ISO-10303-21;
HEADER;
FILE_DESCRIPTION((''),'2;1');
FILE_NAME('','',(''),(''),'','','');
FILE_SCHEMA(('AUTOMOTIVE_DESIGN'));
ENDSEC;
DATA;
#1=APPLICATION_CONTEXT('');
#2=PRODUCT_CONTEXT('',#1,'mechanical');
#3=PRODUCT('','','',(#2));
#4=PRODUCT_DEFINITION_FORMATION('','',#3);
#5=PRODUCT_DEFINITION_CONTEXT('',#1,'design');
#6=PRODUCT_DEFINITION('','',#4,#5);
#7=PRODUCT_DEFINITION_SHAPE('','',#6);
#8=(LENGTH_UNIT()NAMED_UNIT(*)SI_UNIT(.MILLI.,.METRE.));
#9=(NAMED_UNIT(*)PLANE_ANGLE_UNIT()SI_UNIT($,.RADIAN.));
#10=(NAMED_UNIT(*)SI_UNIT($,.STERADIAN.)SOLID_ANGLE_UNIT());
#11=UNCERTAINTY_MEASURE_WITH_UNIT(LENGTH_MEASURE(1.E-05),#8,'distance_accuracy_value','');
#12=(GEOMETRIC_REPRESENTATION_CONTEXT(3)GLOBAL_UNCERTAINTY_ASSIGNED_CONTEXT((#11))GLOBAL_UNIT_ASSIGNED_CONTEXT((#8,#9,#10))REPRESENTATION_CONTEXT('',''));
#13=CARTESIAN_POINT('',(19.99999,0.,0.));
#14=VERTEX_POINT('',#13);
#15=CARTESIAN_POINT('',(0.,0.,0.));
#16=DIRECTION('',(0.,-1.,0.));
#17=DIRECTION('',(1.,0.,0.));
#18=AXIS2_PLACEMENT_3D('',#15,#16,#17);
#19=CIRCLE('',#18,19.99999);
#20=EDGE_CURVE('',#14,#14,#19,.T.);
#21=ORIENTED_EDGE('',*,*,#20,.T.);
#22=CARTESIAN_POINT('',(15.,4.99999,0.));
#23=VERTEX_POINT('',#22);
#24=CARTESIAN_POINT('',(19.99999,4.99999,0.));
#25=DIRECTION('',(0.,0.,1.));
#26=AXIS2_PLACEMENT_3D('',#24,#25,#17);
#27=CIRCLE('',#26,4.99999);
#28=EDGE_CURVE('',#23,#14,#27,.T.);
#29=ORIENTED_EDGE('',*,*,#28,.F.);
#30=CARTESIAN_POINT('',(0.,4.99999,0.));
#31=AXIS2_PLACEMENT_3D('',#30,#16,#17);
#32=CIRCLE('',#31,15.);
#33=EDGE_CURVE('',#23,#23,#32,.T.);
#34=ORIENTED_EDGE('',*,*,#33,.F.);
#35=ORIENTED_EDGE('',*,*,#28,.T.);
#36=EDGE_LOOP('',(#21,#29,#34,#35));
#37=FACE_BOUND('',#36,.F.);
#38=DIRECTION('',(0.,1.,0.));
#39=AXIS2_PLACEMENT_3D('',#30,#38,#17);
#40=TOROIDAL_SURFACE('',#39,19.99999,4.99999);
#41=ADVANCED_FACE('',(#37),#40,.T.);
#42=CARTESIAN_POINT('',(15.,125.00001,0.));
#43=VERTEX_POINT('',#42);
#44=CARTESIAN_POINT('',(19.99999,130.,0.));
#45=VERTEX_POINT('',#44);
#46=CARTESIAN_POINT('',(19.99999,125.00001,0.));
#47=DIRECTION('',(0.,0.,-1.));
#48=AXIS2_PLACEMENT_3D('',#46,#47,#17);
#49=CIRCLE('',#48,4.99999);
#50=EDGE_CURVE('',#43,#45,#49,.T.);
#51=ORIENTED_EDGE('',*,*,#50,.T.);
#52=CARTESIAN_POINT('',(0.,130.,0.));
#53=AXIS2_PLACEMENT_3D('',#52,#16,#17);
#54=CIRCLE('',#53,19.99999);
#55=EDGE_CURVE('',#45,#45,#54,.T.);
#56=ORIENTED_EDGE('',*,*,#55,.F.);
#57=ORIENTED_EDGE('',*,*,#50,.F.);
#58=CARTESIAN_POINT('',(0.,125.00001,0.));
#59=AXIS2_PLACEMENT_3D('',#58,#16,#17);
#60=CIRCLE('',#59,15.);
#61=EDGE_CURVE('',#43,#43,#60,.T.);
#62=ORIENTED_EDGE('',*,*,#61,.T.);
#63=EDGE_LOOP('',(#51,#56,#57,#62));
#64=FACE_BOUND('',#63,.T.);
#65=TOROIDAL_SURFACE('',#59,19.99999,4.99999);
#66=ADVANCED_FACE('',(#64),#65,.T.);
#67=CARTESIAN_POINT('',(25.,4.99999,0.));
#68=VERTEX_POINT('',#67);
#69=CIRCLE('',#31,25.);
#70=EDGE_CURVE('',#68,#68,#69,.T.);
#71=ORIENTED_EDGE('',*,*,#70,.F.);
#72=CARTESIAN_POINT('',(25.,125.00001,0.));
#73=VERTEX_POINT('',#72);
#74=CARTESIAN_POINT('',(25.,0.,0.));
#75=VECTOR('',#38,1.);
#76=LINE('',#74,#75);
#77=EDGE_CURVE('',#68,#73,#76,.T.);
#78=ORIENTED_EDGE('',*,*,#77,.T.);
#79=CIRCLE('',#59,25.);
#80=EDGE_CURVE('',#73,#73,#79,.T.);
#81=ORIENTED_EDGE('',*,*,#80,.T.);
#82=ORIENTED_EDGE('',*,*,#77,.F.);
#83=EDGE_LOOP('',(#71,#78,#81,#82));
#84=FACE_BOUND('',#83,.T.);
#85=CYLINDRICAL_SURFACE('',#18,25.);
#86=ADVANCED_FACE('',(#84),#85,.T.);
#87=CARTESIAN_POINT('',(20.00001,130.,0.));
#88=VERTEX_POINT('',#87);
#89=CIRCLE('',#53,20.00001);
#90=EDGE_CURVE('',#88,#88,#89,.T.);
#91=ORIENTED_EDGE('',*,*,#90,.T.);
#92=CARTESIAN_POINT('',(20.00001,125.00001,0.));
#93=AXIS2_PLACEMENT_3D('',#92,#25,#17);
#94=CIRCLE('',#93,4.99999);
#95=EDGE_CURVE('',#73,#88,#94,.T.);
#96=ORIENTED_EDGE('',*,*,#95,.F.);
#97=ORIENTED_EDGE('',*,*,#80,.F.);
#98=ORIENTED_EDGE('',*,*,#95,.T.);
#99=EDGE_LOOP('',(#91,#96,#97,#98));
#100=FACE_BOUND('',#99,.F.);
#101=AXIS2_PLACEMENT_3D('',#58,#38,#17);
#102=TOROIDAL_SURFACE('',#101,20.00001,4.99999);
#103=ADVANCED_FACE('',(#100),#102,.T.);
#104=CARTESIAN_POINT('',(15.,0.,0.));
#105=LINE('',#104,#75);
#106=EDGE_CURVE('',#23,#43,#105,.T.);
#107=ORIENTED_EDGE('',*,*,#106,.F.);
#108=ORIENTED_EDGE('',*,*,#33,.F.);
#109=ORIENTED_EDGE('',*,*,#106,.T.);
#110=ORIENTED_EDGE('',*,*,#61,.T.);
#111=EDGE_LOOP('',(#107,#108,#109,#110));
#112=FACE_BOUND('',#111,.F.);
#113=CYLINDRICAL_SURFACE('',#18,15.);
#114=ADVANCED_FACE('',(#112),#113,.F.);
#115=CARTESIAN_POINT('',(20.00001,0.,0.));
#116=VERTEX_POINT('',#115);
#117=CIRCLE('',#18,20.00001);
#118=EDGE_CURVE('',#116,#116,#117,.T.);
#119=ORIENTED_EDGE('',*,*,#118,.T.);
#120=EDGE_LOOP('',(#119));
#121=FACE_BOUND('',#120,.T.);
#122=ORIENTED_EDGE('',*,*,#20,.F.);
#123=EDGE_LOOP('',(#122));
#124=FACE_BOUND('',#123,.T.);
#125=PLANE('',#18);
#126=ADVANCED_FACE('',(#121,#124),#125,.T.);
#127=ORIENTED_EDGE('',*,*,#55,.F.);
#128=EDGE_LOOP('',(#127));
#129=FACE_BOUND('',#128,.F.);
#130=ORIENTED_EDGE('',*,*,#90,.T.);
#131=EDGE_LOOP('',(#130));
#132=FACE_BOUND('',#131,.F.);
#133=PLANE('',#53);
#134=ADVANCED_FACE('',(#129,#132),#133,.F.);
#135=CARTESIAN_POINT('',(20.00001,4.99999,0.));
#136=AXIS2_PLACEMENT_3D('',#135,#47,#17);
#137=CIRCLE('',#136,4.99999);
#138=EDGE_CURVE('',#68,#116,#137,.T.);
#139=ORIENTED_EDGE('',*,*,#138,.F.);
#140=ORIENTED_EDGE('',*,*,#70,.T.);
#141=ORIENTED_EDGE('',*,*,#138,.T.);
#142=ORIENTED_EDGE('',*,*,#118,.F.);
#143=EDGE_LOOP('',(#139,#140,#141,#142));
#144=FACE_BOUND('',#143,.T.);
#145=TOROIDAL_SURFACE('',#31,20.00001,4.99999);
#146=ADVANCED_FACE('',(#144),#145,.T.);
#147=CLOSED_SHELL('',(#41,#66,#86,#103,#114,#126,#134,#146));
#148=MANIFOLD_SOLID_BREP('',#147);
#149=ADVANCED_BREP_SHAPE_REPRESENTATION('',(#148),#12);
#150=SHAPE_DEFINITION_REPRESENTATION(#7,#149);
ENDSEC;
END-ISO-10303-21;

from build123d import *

# Parameters (mm, degrees)
F0_R     = 25
F0_R_2   = 15
F1_DEPTH = 130
F2_R     = 4.99999


# Not quite as in the source:
# - a fillet or chamfer is up to 0.001 mm smaller than in the source, because OpenCascade refuses the exact size


with BuildPart() as f1:
    # F0 (on Front) → F1 (new body)
    with BuildSketch(Plane.XZ):
        Circle(F0_R)
        Circle(F0_R_2, mode=Mode.SUBTRACT)
    extrude(amount=-F1_DEPTH)

    # F2 (radius 5 in the source; OpenCascade refuses exactly that, so slightly less here)
    f2_edges = [f1.edges().sort_by_distance(p)[0] for p in [
        (-15, 0, 0),
        (-25, 0, 0),
        (25, 65, 0),
        (-25, 130, 0),
        (-15, 130, 0),
    ]]
    fillet(f2_edges, radius=F2_R)


solid = f1.part
